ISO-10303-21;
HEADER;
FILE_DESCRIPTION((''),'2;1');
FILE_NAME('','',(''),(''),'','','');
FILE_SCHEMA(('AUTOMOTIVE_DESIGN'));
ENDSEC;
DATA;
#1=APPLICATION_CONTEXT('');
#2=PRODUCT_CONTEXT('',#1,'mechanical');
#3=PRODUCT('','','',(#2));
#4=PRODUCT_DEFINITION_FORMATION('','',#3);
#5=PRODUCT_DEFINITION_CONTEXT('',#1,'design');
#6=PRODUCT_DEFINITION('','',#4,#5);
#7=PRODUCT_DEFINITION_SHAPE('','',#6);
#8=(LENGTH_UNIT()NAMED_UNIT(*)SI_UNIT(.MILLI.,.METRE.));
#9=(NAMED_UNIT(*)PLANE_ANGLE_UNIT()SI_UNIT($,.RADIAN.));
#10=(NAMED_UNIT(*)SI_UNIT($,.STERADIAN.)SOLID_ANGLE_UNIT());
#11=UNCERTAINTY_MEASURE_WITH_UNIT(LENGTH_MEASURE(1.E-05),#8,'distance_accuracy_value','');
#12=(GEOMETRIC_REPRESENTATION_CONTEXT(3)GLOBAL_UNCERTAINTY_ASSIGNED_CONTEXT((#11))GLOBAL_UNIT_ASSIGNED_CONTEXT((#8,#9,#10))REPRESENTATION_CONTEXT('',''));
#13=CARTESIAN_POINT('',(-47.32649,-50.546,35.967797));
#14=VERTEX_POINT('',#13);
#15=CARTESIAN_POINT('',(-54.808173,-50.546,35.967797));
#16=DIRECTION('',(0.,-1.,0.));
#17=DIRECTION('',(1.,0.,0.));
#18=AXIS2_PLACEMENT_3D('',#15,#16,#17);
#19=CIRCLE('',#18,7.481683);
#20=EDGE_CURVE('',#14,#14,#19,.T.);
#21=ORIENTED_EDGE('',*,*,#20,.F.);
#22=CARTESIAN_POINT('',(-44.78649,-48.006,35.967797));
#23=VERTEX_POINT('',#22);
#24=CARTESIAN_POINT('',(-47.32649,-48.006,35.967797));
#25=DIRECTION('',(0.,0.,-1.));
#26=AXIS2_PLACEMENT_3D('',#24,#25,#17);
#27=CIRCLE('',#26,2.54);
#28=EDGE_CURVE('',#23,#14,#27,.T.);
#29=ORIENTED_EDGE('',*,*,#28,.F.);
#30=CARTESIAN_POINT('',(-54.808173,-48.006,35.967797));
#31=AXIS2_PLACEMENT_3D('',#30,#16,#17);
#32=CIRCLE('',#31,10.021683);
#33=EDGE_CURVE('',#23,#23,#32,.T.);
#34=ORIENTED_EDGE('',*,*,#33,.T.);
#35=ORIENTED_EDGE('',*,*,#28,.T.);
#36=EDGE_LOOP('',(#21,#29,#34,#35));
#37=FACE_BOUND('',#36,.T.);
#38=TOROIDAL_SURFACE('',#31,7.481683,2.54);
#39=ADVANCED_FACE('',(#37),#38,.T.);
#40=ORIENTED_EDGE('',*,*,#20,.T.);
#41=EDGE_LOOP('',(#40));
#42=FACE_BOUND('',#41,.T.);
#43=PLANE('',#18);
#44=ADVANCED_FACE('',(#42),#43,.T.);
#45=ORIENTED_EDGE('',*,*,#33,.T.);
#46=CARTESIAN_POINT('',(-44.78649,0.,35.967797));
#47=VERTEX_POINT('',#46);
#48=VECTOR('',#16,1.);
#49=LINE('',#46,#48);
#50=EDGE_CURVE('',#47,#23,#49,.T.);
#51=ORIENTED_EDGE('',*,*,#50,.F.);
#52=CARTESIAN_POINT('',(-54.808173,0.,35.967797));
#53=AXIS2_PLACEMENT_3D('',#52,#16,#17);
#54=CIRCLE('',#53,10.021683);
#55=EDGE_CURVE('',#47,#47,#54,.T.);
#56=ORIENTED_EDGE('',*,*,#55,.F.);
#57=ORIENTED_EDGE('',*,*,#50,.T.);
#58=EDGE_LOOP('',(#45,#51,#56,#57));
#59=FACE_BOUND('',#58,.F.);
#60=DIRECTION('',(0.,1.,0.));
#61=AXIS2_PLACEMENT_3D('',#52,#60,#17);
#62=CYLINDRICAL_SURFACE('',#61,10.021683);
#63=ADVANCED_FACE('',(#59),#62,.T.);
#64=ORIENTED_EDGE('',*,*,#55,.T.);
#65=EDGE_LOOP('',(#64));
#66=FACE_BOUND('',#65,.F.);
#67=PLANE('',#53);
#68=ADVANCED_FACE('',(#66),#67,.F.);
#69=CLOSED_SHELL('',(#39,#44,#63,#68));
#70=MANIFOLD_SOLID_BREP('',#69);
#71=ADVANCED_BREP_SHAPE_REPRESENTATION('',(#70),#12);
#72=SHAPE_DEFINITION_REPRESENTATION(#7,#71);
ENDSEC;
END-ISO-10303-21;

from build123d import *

# Parameters (mm, degrees)
F0_R     = 10.0216829106
F1_DEPTH = 50.546
F2_R     = 2.54


# Not quite as in the source:
# - the program builds the solid bodies; features that only make, move or delete a surface that nothing else refers to are left out


with BuildPart() as f1:
    # F0 (on Front) → F1 (new body)
    with BuildSketch(Plane.XZ):
        with Locations((-54.8081733286, 35.9677970409)):
            Circle(F0_R)
    extrude(amount=F1_DEPTH)

    # F2
    f2_edges = [f1.edges().sort_by_distance(p)[0] for p in [
        (-64.829856, -50.546, 35.967797),
    ]]
    fillet(f2_edges, radius=F2_R)


solid = f1.part
